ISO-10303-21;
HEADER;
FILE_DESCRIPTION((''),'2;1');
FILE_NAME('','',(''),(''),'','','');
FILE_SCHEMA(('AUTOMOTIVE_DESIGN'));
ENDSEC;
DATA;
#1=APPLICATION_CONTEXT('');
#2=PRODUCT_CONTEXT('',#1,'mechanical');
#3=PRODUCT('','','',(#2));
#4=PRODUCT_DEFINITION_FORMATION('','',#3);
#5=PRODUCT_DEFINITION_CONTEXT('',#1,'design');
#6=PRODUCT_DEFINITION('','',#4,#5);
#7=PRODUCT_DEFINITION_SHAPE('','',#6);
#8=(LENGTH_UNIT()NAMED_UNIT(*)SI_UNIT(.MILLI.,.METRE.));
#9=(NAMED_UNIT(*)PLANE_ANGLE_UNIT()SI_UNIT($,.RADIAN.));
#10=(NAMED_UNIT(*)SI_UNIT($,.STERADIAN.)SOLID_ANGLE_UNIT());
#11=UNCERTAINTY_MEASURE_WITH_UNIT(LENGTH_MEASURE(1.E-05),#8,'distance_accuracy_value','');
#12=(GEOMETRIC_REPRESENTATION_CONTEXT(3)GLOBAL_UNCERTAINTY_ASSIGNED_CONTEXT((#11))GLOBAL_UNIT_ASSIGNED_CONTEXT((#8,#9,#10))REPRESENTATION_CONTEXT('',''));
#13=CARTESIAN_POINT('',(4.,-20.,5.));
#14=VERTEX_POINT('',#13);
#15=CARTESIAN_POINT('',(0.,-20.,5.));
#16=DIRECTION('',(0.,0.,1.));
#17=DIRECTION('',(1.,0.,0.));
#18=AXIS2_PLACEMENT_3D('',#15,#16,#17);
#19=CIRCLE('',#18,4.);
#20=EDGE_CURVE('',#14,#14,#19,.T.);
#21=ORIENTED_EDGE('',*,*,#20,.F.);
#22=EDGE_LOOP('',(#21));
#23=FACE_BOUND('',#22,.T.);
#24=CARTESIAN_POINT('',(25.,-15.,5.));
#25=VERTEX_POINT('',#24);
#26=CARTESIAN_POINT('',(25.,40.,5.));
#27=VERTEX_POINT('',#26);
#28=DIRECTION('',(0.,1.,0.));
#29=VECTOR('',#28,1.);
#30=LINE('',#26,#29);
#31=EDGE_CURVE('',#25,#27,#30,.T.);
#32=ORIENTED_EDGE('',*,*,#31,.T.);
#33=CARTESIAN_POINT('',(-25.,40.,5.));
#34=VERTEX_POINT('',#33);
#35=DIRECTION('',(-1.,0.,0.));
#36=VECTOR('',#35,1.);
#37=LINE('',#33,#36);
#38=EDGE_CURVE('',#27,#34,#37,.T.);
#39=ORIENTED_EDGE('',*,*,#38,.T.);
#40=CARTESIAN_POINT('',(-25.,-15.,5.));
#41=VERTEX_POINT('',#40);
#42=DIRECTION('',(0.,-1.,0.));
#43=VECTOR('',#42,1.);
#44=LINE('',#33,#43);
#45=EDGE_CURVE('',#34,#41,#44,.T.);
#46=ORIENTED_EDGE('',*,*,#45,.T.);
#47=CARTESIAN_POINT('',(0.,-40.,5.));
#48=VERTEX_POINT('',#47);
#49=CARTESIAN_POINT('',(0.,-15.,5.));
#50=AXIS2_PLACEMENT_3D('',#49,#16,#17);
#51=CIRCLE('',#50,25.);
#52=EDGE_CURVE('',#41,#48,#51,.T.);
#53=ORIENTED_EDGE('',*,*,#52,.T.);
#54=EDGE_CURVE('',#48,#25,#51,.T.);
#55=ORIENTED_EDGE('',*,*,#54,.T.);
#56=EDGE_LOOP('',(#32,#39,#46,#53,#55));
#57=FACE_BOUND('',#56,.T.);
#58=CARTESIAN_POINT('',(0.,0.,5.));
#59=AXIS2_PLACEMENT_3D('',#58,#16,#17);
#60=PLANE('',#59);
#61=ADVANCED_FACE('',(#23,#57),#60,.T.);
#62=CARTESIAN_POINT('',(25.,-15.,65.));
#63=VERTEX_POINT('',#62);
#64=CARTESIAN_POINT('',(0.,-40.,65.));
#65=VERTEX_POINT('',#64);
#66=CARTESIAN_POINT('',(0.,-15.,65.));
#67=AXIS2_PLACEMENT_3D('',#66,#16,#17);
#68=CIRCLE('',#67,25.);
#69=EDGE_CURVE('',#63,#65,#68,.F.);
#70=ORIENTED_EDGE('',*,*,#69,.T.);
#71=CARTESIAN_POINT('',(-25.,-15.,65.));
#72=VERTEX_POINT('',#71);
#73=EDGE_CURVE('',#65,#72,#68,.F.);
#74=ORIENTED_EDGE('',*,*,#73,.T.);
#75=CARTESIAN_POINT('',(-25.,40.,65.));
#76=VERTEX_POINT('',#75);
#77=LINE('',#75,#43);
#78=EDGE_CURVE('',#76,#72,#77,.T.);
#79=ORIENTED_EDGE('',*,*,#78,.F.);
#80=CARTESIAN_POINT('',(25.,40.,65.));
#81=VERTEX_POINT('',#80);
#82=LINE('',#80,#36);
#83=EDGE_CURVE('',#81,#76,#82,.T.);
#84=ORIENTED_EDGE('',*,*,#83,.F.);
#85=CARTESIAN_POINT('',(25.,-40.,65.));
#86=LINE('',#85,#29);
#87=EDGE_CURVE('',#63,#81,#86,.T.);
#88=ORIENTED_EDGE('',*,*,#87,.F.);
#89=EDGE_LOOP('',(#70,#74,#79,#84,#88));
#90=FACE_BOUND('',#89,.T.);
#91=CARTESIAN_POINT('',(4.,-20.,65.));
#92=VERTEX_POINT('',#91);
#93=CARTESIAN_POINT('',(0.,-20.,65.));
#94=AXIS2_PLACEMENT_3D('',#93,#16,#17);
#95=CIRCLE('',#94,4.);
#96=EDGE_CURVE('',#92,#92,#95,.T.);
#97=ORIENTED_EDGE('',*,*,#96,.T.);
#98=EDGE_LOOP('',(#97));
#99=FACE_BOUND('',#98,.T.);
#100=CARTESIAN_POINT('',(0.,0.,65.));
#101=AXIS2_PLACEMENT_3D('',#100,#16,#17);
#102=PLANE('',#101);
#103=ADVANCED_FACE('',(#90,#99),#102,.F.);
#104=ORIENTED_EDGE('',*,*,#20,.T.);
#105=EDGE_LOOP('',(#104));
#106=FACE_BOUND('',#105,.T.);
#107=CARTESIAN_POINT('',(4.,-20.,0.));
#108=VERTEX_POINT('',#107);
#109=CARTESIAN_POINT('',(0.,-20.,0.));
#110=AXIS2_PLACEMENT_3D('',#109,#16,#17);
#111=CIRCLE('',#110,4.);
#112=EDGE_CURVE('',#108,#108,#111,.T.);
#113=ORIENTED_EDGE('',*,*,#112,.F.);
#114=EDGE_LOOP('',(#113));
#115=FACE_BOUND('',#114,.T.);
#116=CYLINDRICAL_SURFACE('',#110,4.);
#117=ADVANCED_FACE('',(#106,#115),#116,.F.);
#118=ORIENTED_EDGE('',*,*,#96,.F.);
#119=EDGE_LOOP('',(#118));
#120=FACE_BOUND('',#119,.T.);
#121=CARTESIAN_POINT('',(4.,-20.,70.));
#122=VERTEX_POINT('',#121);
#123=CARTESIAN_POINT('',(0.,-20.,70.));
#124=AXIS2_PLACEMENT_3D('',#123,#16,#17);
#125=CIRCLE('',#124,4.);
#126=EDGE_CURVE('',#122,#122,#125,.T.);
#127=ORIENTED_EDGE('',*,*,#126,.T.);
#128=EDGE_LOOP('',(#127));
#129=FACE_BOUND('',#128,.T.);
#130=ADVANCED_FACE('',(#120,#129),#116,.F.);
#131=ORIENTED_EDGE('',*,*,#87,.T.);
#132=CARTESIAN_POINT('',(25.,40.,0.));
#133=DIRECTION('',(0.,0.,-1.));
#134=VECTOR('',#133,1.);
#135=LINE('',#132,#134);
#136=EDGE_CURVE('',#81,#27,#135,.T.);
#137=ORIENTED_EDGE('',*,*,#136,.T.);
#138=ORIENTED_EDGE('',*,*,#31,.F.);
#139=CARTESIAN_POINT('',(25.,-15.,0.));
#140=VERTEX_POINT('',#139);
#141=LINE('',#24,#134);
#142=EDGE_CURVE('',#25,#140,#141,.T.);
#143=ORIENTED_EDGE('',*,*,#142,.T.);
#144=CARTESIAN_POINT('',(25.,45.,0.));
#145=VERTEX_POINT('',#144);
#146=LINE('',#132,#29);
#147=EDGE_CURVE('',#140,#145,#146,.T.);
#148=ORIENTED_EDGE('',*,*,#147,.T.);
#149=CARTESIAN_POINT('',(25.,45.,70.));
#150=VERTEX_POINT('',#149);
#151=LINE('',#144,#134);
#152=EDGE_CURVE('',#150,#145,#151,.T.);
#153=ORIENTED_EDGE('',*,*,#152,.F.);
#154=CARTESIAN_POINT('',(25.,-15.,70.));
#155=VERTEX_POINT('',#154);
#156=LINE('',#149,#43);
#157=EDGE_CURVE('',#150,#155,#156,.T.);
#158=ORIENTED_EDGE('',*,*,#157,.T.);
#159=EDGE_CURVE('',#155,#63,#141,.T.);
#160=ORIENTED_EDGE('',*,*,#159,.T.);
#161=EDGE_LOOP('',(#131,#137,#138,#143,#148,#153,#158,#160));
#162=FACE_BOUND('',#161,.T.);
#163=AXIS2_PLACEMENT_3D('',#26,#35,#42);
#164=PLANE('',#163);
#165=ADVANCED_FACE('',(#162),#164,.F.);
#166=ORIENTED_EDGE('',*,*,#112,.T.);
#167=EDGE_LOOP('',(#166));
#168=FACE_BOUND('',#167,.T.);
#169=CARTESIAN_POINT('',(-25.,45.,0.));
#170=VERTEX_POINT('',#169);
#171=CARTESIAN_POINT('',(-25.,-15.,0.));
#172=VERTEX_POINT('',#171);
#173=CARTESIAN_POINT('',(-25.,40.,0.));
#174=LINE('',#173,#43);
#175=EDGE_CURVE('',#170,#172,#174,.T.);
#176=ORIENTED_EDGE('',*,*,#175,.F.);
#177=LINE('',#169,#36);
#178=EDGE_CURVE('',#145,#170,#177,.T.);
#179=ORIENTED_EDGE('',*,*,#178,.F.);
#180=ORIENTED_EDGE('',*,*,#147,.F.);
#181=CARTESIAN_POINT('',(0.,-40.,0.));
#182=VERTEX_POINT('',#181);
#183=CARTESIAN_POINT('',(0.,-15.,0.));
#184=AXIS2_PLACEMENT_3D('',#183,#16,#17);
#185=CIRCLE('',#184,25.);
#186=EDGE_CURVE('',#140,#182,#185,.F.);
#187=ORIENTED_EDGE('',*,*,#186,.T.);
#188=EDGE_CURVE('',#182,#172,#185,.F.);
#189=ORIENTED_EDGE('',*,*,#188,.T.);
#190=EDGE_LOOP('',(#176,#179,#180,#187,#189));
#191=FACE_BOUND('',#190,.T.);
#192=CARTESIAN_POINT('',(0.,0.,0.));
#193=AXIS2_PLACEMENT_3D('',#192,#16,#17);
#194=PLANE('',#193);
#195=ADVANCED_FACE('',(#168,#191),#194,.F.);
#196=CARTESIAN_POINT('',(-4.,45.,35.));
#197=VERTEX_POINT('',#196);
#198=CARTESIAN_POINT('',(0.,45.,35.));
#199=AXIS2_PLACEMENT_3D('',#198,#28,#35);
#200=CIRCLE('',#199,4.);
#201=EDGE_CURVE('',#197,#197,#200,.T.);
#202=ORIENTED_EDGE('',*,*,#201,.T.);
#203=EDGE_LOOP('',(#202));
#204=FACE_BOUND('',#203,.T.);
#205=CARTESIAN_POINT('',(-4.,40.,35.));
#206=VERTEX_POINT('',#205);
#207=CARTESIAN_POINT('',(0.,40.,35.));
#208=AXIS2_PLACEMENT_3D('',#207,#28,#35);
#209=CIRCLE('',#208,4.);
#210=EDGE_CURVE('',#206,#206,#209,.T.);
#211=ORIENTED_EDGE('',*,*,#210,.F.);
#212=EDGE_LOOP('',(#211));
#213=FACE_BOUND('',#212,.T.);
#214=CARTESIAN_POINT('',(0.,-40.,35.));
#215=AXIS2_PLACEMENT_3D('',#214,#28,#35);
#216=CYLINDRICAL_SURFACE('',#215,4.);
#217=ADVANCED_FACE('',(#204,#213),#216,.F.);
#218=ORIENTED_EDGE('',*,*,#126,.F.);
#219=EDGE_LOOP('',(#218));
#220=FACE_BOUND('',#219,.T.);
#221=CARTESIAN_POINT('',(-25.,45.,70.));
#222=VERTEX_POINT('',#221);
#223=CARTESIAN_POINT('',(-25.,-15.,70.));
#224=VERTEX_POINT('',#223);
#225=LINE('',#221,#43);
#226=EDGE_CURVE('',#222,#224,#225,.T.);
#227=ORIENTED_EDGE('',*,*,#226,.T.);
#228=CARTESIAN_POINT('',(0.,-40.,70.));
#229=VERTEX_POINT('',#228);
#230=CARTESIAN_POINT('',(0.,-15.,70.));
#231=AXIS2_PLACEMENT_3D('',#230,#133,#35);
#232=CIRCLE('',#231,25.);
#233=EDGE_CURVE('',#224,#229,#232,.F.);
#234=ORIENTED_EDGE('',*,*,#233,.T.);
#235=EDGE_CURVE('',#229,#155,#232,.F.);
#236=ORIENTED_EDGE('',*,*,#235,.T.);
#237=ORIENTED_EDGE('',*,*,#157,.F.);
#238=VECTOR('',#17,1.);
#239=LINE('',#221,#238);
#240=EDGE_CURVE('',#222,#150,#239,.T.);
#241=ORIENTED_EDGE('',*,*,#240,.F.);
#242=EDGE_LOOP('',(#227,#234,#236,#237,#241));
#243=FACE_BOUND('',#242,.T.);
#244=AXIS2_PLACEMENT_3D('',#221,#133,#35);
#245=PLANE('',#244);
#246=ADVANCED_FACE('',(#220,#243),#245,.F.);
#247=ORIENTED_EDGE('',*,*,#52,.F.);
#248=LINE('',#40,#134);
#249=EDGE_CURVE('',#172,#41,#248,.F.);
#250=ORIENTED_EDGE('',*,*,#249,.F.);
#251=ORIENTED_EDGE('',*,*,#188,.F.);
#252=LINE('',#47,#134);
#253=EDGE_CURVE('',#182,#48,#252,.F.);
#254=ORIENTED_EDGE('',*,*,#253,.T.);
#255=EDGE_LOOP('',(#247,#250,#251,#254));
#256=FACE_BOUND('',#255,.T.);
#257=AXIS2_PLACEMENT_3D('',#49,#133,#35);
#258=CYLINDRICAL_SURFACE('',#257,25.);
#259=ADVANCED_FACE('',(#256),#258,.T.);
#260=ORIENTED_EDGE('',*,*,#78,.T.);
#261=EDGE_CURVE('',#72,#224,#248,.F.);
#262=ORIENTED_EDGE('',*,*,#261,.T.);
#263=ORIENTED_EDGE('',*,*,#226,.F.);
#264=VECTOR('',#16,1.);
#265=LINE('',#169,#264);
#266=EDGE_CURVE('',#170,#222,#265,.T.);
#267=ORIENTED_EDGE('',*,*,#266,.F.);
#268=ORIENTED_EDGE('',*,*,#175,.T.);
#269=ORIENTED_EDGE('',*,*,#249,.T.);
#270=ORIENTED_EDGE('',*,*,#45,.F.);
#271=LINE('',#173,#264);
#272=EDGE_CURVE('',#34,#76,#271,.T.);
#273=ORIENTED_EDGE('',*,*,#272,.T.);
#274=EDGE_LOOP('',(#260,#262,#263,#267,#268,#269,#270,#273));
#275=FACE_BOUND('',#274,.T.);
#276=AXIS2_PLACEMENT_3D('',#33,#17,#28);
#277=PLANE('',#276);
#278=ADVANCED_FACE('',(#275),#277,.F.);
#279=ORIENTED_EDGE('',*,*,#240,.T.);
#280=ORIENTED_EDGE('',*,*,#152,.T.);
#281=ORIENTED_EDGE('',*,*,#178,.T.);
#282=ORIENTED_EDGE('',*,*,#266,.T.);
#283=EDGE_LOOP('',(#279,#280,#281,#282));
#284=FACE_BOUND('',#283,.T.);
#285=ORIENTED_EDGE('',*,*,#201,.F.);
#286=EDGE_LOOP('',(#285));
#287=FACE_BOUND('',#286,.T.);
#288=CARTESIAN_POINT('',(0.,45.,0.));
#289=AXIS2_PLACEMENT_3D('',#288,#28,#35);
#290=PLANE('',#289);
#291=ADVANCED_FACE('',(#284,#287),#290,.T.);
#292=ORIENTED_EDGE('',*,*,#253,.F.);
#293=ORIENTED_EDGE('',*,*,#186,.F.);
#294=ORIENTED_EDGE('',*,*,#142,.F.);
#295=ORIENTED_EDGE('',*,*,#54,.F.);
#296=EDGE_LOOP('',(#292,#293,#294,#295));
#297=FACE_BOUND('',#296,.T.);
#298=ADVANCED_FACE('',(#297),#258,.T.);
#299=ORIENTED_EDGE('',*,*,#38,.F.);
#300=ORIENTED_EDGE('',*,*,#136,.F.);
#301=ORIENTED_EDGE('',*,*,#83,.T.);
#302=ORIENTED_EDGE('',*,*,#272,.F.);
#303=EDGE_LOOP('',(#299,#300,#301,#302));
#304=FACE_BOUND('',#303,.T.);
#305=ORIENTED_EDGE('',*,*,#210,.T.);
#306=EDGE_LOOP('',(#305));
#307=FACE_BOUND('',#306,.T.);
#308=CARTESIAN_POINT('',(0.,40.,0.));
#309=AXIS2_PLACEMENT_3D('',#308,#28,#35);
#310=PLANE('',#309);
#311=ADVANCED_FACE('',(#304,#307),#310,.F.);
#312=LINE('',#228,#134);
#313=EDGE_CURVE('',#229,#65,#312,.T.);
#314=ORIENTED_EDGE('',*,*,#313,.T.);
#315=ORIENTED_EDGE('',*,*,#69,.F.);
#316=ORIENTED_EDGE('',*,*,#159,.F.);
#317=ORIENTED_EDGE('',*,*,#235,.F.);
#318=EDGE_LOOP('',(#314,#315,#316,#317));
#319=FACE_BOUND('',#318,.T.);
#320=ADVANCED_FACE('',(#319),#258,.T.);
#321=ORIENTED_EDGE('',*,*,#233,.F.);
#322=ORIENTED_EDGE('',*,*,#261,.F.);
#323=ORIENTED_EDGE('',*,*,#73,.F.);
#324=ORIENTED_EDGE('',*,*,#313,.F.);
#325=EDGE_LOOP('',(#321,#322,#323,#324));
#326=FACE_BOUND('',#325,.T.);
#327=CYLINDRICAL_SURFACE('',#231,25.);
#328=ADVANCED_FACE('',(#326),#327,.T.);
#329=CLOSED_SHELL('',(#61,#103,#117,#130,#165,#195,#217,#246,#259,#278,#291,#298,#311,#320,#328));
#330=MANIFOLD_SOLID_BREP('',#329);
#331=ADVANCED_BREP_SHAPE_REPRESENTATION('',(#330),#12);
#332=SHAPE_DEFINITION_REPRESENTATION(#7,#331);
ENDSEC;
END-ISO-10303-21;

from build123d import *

# Parameters (mm, degrees)
SKETCH_1_W          = 50
SKETCH_1_H          = 80
EXTRUDE_1_DEPTH     = 5
SKETCH_2_W          = 50
SKETCH_2_H          = 80
EXTRUDE_2_DEPTH     = 5
SKETCH_3_W          = 50
SKETCH_3_H          = 70
EXTRUDE_3_DEPTH     = 5
SKETCH_4_R          = 4
CUT_EXTRUDE_1_DEPTH = 87.890735985
SKETCH_5_R          = 4
CUT_EXTRUDE_2_DEPTH = 113.915897906
FILLET_1_R          = 25


with BuildPart() as part:
    # 草图1 → 凸台-拉伸1 (new body)
    with BuildSketch(Plane.XY):
        Rectangle(SKETCH_1_W, SKETCH_1_H)
    extrude(amount=EXTRUDE_1_DEPTH)



with BuildPart() as body_2:
    # 草图2 → 凸台-拉伸2 (new body)
    with BuildSketch(Plane.XY.offset(65)):
        Rectangle(SKETCH_2_W, SKETCH_2_H)
    extrude(amount=EXTRUDE_2_DEPTH)


with BuildPart() as part_1:
    add(part.part)

    add(body_2.part)  # 凸台-拉伸3 merges body 2
    # 草图3 → 凸台-拉伸3 (add)
    with BuildSketch(Plane(origin=(0, 40, 0), x_dir=(1, 0, 0), z_dir=(0, 1, 0))):
        with Locations((0, -35)):
            Rectangle(SKETCH_3_W, SKETCH_3_H)
    extrude(amount=EXTRUDE_3_DEPTH)

    # 草图4 → 切除-拉伸1 (cut, through all)
    with BuildSketch(Plane.XY.offset(70)):
        with Locations((0, -20)):
            Circle(SKETCH_4_R)
    extrude(amount=-CUT_EXTRUDE_1_DEPTH, mode=Mode.SUBTRACT)

    # 草图5 → 切除-拉伸2 (cut, through all)
    with BuildSketch(Plane(origin=(0, 45, 0), x_dir=(1, 0, 0), z_dir=(0, 1, 0))):
        with Locations(Location((0, -35, 0), (0, 0, 180))):
            Circle(SKETCH_5_R)
    extrude(amount=-CUT_EXTRUDE_2_DEPTH, mode=Mode.SUBTRACT)

    # 圆角1
    fillet_1_edges = [part_1.edges().sort_by_distance(p)[0] for p in [
        (-25, -40, 2.5),
        (25, -40, 2.5),
        (25, -40, 67.5),
        (-25, -40, 67.5),
    ]]
    fillet(fillet_1_edges, radius=FILLET_1_R - 0.0001)  # a hair under: the kernel refuses the full size


solid = part_1.part
